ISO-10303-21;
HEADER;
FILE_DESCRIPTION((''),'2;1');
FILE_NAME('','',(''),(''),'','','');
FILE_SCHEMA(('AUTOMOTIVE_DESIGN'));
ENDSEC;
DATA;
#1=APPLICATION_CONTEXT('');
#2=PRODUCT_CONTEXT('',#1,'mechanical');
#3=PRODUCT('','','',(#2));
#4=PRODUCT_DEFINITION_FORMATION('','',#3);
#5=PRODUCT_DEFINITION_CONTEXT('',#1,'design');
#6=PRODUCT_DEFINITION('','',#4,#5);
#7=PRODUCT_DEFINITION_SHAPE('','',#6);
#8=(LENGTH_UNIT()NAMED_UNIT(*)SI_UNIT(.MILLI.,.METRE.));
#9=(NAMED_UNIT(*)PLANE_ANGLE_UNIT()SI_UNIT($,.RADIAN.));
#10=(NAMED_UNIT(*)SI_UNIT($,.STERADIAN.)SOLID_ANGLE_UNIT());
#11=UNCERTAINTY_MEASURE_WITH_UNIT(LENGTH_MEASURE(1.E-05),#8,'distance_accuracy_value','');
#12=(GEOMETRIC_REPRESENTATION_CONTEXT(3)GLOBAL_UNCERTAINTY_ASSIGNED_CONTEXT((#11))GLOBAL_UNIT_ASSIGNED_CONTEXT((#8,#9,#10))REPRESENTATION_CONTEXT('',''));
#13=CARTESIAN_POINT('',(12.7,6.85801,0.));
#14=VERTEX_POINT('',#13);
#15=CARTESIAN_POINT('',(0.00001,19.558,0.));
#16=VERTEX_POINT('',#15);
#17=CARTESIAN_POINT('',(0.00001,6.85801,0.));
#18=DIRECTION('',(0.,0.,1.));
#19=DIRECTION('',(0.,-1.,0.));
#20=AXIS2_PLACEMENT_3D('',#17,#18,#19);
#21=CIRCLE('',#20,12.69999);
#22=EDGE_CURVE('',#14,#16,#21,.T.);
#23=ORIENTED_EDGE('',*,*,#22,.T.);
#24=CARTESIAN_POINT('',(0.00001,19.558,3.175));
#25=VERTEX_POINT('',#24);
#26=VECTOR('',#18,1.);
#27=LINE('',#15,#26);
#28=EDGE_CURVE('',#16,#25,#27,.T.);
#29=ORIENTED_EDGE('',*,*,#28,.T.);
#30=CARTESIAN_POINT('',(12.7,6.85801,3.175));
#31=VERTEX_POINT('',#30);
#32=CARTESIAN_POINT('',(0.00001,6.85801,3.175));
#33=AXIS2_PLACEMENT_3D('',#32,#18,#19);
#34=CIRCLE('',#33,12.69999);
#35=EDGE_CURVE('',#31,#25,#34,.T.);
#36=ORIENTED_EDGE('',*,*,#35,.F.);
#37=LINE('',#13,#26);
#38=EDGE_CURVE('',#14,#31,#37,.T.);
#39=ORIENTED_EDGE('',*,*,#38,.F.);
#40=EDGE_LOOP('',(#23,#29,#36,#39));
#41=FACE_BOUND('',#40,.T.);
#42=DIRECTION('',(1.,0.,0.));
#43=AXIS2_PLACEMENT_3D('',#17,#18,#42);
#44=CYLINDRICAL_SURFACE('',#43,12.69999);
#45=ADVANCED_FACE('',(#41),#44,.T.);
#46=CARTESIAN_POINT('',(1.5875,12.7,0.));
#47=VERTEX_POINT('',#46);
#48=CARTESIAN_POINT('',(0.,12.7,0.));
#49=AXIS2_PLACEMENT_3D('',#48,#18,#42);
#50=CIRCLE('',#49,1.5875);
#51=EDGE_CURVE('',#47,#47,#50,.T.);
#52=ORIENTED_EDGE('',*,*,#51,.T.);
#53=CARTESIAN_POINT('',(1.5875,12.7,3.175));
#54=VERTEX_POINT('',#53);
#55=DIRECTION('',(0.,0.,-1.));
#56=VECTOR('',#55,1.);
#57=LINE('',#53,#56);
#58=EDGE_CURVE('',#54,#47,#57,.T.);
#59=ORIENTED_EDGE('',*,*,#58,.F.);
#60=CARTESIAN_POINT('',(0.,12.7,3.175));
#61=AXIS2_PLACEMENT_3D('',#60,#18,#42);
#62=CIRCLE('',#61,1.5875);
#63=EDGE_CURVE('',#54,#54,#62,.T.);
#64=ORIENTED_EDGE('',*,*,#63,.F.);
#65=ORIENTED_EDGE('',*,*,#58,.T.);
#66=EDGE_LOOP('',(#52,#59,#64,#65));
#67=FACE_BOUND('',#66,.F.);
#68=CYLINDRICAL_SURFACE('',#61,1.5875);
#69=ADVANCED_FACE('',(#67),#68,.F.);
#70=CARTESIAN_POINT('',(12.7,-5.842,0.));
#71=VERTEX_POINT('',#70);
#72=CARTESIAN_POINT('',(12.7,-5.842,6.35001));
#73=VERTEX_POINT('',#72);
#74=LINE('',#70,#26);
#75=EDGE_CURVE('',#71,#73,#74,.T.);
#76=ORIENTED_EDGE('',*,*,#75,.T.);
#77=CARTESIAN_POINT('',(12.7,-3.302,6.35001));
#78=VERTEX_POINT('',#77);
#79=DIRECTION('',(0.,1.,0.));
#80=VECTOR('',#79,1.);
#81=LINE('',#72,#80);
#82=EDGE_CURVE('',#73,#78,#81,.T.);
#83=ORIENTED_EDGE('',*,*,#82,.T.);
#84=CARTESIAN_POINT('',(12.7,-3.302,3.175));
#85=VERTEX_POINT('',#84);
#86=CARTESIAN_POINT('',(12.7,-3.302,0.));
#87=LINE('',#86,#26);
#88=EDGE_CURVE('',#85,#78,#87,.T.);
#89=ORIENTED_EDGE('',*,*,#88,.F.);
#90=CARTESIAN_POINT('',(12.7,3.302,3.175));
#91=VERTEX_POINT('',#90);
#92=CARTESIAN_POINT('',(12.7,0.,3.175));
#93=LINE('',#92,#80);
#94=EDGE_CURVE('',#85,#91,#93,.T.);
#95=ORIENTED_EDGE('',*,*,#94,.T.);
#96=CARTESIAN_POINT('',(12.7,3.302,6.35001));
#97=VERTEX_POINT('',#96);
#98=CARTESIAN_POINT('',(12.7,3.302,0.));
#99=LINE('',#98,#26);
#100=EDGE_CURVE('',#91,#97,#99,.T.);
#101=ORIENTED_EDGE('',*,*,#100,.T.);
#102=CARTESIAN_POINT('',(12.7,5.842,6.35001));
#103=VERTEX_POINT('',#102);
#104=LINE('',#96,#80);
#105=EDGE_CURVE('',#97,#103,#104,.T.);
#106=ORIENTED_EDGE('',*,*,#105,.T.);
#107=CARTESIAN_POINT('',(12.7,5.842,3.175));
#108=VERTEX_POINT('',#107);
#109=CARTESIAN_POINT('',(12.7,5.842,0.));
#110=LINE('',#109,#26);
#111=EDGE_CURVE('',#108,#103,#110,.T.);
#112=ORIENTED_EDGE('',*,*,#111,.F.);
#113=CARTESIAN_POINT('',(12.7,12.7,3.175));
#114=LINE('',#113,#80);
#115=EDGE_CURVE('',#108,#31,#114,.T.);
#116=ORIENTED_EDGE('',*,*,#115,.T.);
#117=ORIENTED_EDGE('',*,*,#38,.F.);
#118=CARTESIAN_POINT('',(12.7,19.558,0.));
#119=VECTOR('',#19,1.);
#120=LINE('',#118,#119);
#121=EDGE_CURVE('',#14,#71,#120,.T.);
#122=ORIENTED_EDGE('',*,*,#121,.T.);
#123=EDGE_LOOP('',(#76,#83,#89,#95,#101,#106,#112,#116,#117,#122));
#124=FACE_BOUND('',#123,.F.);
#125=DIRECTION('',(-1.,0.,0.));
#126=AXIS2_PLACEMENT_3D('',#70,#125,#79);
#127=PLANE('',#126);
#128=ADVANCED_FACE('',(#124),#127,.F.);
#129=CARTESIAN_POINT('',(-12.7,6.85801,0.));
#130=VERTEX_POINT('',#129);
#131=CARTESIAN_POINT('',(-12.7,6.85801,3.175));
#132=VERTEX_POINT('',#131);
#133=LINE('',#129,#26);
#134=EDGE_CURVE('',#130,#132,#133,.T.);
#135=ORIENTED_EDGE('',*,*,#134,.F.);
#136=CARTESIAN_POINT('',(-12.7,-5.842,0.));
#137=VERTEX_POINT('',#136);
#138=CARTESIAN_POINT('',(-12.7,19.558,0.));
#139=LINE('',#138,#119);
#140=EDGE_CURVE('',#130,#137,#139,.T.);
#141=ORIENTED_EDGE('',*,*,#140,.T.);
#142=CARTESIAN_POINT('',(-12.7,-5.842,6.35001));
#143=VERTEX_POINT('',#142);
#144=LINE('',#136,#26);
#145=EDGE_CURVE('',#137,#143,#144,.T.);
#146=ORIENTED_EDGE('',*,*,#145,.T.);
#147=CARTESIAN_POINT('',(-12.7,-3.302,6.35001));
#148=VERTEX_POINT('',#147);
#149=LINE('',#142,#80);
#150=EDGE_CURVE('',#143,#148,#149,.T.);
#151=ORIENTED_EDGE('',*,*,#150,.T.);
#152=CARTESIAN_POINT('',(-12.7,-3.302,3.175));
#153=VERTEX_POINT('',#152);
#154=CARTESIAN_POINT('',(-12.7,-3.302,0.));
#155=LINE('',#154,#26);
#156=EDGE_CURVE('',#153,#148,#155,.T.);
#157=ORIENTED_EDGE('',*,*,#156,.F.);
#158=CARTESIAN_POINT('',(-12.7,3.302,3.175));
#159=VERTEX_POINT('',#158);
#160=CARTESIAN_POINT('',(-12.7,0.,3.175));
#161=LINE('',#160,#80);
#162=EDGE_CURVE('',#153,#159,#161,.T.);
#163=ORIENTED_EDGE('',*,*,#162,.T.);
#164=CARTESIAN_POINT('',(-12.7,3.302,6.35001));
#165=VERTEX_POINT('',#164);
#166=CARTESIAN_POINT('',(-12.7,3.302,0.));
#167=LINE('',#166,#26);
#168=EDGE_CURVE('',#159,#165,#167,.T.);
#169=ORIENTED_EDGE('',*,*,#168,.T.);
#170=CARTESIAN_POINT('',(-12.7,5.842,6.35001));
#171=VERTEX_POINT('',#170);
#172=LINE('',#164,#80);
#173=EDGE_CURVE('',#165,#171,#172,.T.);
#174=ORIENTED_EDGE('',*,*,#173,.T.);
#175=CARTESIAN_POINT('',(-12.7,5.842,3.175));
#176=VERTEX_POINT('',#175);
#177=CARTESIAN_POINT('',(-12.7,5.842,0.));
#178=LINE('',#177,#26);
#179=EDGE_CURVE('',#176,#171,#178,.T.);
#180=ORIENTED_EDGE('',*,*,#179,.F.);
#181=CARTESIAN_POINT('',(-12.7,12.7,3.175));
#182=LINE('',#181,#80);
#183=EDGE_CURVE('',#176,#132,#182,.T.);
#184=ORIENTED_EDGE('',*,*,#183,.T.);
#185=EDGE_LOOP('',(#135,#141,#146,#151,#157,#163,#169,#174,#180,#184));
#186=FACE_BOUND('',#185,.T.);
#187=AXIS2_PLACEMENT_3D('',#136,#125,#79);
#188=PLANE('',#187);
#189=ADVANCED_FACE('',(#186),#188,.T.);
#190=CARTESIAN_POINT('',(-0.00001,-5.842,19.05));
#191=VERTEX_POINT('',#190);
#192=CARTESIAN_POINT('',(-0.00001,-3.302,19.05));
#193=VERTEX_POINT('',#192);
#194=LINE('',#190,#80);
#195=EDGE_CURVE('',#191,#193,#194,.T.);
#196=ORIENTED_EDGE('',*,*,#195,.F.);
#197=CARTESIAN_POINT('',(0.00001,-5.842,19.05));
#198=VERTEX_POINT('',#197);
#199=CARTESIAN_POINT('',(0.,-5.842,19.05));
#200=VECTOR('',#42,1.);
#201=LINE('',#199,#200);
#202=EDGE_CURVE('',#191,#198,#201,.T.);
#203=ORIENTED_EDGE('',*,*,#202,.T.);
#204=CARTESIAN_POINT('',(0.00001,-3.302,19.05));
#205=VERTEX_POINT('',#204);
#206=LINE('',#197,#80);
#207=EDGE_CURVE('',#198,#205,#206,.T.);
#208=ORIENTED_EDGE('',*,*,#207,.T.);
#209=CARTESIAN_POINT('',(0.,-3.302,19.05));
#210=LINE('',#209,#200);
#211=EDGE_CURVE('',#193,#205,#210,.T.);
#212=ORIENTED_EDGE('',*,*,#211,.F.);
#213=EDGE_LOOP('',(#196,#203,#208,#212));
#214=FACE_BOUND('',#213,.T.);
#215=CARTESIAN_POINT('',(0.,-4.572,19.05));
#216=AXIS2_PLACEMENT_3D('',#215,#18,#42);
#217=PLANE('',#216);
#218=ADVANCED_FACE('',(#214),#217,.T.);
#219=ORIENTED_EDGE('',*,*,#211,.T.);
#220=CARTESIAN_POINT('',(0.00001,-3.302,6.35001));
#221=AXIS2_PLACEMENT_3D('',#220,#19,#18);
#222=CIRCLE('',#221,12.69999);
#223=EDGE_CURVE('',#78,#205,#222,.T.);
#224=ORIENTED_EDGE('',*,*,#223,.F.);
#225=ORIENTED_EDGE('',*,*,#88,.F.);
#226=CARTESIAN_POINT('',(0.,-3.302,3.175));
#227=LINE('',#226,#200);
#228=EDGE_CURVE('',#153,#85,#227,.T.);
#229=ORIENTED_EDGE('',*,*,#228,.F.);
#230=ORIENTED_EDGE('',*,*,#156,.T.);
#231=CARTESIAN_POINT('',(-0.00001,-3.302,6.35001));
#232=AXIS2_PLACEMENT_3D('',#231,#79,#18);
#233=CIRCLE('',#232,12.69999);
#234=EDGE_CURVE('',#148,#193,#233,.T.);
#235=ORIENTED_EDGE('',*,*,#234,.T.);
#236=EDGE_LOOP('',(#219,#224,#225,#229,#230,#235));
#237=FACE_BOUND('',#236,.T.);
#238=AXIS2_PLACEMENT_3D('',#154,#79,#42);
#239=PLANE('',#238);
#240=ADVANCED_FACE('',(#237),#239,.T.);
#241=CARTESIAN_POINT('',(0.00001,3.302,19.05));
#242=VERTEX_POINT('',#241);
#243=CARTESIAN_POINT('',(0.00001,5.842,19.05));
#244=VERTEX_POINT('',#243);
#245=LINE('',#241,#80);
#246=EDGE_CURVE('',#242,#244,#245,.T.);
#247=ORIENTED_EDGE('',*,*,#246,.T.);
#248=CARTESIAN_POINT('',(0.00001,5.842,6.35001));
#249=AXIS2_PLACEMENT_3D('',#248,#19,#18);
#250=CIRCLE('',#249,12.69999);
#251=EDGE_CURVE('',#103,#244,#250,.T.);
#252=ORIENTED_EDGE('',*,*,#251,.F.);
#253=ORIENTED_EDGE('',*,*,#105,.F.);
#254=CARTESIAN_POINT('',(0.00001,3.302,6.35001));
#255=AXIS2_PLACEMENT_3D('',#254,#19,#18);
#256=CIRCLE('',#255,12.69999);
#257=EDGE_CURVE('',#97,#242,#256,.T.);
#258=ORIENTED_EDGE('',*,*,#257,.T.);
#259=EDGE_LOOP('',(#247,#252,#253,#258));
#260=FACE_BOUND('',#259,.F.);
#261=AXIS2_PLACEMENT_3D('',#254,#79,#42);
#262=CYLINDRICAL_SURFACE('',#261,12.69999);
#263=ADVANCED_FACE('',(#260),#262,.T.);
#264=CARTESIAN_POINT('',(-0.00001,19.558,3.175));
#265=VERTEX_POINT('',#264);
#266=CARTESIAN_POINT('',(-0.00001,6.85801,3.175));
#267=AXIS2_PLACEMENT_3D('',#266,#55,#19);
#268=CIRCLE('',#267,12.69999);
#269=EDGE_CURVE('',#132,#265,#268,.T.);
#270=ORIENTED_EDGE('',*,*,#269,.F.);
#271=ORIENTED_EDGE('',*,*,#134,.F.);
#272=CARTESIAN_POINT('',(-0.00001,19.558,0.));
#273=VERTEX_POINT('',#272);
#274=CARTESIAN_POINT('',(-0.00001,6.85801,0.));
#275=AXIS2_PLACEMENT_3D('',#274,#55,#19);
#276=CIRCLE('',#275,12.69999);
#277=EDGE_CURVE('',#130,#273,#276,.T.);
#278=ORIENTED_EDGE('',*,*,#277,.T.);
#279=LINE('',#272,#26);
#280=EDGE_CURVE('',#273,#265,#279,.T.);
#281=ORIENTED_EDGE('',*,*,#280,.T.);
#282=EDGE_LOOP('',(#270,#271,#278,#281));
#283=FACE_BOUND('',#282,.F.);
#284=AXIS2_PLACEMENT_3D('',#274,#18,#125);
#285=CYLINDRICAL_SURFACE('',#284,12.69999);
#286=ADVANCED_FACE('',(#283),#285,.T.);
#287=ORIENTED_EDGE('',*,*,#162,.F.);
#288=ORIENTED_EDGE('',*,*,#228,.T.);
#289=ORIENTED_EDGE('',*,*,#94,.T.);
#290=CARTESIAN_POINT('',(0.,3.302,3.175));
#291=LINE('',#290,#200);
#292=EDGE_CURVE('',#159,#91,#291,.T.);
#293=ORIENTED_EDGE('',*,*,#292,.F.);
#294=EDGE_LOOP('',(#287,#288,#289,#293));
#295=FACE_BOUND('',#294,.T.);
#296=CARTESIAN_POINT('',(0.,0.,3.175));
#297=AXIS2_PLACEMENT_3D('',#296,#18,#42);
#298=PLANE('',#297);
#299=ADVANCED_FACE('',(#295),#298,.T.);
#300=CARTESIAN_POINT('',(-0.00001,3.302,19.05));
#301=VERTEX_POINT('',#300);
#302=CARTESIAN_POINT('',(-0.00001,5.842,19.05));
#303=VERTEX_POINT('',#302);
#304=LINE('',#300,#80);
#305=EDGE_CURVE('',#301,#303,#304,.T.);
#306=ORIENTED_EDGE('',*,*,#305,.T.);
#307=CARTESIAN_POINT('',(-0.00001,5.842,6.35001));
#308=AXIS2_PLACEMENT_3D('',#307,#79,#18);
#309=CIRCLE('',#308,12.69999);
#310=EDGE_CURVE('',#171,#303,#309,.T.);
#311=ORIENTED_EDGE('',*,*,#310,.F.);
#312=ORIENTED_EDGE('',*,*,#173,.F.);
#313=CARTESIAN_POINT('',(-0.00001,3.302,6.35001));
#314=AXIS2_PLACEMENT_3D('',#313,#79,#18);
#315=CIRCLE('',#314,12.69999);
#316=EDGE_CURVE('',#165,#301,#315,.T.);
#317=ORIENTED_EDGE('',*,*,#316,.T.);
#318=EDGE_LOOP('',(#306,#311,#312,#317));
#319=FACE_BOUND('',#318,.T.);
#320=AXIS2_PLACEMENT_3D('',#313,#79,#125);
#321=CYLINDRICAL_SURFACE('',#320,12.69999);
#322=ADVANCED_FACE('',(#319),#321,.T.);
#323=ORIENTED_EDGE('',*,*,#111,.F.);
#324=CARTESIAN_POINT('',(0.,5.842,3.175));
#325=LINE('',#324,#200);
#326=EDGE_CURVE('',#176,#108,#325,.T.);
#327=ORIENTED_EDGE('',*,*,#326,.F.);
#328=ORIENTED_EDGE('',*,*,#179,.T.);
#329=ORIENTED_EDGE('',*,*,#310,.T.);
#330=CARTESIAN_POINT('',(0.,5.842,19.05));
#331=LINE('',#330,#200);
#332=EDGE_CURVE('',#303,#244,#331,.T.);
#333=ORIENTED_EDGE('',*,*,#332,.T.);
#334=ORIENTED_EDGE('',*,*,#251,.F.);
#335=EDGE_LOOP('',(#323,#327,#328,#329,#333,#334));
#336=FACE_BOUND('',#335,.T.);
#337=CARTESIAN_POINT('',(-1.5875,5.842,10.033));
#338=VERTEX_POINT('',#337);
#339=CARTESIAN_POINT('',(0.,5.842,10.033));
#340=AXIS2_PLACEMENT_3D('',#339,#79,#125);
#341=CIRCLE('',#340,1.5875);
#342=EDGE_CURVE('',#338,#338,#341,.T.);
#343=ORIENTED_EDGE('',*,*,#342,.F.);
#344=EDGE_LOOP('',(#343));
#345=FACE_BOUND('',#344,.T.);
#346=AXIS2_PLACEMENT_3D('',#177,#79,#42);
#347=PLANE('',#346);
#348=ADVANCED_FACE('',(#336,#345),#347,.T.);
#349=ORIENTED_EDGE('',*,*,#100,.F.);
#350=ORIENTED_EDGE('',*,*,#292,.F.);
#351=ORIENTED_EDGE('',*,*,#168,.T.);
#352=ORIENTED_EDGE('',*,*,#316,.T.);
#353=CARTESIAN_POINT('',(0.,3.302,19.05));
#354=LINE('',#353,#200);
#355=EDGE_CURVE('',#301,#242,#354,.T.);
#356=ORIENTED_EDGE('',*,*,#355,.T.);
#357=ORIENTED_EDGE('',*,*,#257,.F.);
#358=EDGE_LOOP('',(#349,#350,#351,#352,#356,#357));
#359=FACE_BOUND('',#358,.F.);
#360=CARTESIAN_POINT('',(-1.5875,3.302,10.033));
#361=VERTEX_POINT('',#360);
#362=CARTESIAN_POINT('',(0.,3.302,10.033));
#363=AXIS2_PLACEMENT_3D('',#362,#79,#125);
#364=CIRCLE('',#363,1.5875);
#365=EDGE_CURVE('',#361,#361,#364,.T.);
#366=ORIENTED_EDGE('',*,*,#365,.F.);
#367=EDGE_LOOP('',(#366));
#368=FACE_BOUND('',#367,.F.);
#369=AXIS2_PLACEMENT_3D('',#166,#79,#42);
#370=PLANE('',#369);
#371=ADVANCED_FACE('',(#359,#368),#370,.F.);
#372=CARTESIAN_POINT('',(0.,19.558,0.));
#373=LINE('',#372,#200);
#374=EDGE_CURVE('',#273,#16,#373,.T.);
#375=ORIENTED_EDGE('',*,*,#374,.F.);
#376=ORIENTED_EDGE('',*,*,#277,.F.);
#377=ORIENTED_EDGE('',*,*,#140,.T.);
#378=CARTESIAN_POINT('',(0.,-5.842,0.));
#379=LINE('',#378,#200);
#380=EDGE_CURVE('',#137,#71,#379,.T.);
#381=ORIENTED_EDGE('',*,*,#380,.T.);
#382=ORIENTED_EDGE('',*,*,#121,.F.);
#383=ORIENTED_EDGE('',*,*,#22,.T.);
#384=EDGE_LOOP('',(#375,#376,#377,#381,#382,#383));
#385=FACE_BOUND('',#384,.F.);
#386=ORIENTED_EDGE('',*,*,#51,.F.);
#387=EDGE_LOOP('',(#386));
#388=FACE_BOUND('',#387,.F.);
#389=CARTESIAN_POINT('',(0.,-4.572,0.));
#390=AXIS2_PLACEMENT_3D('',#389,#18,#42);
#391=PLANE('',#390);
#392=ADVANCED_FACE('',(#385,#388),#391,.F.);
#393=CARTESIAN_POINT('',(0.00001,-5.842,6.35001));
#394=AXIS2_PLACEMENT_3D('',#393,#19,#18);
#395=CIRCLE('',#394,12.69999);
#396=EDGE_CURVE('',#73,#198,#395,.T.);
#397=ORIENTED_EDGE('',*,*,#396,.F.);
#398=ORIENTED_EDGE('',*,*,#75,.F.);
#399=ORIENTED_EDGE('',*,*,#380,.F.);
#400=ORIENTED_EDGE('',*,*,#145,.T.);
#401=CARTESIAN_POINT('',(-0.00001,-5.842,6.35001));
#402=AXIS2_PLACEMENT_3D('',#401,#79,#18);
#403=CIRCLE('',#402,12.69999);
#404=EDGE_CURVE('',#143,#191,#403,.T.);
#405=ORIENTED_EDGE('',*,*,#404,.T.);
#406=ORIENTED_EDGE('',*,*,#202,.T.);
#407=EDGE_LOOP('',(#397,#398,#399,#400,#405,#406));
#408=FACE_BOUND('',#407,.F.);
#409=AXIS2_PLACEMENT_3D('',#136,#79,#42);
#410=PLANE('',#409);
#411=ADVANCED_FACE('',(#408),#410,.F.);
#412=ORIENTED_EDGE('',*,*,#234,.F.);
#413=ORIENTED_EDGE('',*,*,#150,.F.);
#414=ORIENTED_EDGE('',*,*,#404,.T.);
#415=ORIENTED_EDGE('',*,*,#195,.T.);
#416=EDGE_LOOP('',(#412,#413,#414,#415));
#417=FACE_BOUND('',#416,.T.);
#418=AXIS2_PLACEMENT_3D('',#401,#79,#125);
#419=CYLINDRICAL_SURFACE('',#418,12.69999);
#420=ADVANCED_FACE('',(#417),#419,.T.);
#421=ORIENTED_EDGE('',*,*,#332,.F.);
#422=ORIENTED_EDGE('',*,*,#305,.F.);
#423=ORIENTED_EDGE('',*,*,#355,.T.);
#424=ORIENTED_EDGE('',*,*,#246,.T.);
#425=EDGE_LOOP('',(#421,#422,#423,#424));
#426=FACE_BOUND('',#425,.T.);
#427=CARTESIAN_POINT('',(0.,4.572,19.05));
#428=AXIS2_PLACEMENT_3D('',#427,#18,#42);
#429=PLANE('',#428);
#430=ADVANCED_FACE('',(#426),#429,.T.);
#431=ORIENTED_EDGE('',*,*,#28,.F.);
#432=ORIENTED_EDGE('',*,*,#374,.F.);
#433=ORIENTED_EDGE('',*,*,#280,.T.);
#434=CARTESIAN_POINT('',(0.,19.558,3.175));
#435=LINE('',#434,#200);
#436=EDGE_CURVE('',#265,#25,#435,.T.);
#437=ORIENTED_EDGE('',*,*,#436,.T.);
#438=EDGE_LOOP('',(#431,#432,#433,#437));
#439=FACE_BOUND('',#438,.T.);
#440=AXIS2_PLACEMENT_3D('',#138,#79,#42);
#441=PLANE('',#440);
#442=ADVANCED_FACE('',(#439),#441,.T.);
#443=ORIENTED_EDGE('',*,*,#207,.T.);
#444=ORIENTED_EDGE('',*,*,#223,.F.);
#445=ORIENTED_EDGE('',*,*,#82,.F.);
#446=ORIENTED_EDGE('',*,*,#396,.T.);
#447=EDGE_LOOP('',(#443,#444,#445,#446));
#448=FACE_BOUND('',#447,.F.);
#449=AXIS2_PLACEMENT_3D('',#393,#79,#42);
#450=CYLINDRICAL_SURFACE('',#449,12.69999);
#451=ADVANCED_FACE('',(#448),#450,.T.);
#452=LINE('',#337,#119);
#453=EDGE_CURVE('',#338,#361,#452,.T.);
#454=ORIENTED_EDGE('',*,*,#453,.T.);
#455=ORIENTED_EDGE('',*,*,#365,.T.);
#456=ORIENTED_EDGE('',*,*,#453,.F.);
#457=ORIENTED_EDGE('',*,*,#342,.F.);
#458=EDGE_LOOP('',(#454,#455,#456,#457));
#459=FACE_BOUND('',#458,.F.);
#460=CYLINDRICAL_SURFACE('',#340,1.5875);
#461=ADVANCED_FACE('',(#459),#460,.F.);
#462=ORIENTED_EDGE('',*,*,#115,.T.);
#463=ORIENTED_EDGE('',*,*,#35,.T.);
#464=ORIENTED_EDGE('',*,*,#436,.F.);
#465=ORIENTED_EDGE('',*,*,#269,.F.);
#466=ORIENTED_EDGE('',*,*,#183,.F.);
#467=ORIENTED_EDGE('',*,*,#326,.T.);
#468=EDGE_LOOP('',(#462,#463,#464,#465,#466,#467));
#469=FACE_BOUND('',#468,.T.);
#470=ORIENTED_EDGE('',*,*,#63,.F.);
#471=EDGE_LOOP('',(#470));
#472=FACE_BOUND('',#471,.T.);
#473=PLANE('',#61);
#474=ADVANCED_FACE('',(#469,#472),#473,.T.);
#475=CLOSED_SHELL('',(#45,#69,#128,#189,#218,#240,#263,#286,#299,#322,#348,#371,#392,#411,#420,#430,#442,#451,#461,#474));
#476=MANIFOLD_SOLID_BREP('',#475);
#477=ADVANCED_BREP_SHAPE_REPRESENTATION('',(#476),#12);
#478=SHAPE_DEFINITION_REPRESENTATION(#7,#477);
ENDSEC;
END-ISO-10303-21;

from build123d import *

# Parameters (mm, degrees)
F0_W     = 25.4
F0_H     = 6.604
F1_DEPTH = 3.175
F0_H_2   = 13.716
F0_H_3   = 2.54
F2_DEPTH = 19.05
F3_R     = 12.69999
F4_R     = 1.5875
F5_DEPTH = 25.4
F6_R     = 1.5875
F7_DEPTH = 2.54


# Not quite as in the source:
# - a fillet or chamfer is up to 0.001 mm smaller than in the source, because OpenCascade refuses the exact size


with BuildPart() as f1:
    # F0 (on Top) → F1 (new body)
    with BuildSketch(Plane.XY):
        Rectangle(F0_W, F0_H)
    extrude(amount=F1_DEPTH)



with BuildPart() as f1b:
    # F0 (on Top) → F1, piece 2 (new body)
    with BuildSketch(Plane.XY):
        with Locations((0, 12.7)):
            Rectangle(F0_W, F0_H_2)
    extrude(amount=F1_DEPTH)


with BuildPart() as f1_1:
    add(f1.part)

    add(f1b.part)  # F2 merges F1b
    # F0 (on Top) → F2 (join)
    with BuildSketch(Plane.XY):
        with Locations((0, -4.572)):
            Rectangle(F0_W, F0_H_3)
        with Locations((0, 4.572)):
            Rectangle(F0_W, F0_H_3)
    extrude(amount=F2_DEPTH)

    # F3 (radius 12.7 in the source; OpenCascade refuses exactly that, so slightly less here)
    f3_edges = [f1_1.edges().sort_by_distance(p)[0] for p in [
        (12.7, -4.572, 19.05),
        (12.7, 4.572, 19.05),
        (-12.7, -4.572, 19.05),
        (-12.7, 4.572, 19.05),
        (12.7, 19.558, 1.5875),
        (-12.7, 19.558, 1.5875),
    ]]
    fillet(f3_edges, radius=F3_R)

    # F4 (on face) → F5 (cut)
    with BuildSketch(Plane.XY.offset(3.175)):
        with Locations((0, 12.7)):
            Circle(F4_R)
    extrude(amount=-F5_DEPTH, mode=Mode.SUBTRACT)

    # F6 (on face) → F7 (cut, through all)
    with BuildSketch(Plane(origin=(0, 5.842, 0), x_dir=(-1, 0, 0), z_dir=(0, 1, 0))):
        with Locations((0, 10.033)):
            Circle(F6_R)
    extrude(amount=-F7_DEPTH, mode=Mode.SUBTRACT)


solid = f1_1.part
